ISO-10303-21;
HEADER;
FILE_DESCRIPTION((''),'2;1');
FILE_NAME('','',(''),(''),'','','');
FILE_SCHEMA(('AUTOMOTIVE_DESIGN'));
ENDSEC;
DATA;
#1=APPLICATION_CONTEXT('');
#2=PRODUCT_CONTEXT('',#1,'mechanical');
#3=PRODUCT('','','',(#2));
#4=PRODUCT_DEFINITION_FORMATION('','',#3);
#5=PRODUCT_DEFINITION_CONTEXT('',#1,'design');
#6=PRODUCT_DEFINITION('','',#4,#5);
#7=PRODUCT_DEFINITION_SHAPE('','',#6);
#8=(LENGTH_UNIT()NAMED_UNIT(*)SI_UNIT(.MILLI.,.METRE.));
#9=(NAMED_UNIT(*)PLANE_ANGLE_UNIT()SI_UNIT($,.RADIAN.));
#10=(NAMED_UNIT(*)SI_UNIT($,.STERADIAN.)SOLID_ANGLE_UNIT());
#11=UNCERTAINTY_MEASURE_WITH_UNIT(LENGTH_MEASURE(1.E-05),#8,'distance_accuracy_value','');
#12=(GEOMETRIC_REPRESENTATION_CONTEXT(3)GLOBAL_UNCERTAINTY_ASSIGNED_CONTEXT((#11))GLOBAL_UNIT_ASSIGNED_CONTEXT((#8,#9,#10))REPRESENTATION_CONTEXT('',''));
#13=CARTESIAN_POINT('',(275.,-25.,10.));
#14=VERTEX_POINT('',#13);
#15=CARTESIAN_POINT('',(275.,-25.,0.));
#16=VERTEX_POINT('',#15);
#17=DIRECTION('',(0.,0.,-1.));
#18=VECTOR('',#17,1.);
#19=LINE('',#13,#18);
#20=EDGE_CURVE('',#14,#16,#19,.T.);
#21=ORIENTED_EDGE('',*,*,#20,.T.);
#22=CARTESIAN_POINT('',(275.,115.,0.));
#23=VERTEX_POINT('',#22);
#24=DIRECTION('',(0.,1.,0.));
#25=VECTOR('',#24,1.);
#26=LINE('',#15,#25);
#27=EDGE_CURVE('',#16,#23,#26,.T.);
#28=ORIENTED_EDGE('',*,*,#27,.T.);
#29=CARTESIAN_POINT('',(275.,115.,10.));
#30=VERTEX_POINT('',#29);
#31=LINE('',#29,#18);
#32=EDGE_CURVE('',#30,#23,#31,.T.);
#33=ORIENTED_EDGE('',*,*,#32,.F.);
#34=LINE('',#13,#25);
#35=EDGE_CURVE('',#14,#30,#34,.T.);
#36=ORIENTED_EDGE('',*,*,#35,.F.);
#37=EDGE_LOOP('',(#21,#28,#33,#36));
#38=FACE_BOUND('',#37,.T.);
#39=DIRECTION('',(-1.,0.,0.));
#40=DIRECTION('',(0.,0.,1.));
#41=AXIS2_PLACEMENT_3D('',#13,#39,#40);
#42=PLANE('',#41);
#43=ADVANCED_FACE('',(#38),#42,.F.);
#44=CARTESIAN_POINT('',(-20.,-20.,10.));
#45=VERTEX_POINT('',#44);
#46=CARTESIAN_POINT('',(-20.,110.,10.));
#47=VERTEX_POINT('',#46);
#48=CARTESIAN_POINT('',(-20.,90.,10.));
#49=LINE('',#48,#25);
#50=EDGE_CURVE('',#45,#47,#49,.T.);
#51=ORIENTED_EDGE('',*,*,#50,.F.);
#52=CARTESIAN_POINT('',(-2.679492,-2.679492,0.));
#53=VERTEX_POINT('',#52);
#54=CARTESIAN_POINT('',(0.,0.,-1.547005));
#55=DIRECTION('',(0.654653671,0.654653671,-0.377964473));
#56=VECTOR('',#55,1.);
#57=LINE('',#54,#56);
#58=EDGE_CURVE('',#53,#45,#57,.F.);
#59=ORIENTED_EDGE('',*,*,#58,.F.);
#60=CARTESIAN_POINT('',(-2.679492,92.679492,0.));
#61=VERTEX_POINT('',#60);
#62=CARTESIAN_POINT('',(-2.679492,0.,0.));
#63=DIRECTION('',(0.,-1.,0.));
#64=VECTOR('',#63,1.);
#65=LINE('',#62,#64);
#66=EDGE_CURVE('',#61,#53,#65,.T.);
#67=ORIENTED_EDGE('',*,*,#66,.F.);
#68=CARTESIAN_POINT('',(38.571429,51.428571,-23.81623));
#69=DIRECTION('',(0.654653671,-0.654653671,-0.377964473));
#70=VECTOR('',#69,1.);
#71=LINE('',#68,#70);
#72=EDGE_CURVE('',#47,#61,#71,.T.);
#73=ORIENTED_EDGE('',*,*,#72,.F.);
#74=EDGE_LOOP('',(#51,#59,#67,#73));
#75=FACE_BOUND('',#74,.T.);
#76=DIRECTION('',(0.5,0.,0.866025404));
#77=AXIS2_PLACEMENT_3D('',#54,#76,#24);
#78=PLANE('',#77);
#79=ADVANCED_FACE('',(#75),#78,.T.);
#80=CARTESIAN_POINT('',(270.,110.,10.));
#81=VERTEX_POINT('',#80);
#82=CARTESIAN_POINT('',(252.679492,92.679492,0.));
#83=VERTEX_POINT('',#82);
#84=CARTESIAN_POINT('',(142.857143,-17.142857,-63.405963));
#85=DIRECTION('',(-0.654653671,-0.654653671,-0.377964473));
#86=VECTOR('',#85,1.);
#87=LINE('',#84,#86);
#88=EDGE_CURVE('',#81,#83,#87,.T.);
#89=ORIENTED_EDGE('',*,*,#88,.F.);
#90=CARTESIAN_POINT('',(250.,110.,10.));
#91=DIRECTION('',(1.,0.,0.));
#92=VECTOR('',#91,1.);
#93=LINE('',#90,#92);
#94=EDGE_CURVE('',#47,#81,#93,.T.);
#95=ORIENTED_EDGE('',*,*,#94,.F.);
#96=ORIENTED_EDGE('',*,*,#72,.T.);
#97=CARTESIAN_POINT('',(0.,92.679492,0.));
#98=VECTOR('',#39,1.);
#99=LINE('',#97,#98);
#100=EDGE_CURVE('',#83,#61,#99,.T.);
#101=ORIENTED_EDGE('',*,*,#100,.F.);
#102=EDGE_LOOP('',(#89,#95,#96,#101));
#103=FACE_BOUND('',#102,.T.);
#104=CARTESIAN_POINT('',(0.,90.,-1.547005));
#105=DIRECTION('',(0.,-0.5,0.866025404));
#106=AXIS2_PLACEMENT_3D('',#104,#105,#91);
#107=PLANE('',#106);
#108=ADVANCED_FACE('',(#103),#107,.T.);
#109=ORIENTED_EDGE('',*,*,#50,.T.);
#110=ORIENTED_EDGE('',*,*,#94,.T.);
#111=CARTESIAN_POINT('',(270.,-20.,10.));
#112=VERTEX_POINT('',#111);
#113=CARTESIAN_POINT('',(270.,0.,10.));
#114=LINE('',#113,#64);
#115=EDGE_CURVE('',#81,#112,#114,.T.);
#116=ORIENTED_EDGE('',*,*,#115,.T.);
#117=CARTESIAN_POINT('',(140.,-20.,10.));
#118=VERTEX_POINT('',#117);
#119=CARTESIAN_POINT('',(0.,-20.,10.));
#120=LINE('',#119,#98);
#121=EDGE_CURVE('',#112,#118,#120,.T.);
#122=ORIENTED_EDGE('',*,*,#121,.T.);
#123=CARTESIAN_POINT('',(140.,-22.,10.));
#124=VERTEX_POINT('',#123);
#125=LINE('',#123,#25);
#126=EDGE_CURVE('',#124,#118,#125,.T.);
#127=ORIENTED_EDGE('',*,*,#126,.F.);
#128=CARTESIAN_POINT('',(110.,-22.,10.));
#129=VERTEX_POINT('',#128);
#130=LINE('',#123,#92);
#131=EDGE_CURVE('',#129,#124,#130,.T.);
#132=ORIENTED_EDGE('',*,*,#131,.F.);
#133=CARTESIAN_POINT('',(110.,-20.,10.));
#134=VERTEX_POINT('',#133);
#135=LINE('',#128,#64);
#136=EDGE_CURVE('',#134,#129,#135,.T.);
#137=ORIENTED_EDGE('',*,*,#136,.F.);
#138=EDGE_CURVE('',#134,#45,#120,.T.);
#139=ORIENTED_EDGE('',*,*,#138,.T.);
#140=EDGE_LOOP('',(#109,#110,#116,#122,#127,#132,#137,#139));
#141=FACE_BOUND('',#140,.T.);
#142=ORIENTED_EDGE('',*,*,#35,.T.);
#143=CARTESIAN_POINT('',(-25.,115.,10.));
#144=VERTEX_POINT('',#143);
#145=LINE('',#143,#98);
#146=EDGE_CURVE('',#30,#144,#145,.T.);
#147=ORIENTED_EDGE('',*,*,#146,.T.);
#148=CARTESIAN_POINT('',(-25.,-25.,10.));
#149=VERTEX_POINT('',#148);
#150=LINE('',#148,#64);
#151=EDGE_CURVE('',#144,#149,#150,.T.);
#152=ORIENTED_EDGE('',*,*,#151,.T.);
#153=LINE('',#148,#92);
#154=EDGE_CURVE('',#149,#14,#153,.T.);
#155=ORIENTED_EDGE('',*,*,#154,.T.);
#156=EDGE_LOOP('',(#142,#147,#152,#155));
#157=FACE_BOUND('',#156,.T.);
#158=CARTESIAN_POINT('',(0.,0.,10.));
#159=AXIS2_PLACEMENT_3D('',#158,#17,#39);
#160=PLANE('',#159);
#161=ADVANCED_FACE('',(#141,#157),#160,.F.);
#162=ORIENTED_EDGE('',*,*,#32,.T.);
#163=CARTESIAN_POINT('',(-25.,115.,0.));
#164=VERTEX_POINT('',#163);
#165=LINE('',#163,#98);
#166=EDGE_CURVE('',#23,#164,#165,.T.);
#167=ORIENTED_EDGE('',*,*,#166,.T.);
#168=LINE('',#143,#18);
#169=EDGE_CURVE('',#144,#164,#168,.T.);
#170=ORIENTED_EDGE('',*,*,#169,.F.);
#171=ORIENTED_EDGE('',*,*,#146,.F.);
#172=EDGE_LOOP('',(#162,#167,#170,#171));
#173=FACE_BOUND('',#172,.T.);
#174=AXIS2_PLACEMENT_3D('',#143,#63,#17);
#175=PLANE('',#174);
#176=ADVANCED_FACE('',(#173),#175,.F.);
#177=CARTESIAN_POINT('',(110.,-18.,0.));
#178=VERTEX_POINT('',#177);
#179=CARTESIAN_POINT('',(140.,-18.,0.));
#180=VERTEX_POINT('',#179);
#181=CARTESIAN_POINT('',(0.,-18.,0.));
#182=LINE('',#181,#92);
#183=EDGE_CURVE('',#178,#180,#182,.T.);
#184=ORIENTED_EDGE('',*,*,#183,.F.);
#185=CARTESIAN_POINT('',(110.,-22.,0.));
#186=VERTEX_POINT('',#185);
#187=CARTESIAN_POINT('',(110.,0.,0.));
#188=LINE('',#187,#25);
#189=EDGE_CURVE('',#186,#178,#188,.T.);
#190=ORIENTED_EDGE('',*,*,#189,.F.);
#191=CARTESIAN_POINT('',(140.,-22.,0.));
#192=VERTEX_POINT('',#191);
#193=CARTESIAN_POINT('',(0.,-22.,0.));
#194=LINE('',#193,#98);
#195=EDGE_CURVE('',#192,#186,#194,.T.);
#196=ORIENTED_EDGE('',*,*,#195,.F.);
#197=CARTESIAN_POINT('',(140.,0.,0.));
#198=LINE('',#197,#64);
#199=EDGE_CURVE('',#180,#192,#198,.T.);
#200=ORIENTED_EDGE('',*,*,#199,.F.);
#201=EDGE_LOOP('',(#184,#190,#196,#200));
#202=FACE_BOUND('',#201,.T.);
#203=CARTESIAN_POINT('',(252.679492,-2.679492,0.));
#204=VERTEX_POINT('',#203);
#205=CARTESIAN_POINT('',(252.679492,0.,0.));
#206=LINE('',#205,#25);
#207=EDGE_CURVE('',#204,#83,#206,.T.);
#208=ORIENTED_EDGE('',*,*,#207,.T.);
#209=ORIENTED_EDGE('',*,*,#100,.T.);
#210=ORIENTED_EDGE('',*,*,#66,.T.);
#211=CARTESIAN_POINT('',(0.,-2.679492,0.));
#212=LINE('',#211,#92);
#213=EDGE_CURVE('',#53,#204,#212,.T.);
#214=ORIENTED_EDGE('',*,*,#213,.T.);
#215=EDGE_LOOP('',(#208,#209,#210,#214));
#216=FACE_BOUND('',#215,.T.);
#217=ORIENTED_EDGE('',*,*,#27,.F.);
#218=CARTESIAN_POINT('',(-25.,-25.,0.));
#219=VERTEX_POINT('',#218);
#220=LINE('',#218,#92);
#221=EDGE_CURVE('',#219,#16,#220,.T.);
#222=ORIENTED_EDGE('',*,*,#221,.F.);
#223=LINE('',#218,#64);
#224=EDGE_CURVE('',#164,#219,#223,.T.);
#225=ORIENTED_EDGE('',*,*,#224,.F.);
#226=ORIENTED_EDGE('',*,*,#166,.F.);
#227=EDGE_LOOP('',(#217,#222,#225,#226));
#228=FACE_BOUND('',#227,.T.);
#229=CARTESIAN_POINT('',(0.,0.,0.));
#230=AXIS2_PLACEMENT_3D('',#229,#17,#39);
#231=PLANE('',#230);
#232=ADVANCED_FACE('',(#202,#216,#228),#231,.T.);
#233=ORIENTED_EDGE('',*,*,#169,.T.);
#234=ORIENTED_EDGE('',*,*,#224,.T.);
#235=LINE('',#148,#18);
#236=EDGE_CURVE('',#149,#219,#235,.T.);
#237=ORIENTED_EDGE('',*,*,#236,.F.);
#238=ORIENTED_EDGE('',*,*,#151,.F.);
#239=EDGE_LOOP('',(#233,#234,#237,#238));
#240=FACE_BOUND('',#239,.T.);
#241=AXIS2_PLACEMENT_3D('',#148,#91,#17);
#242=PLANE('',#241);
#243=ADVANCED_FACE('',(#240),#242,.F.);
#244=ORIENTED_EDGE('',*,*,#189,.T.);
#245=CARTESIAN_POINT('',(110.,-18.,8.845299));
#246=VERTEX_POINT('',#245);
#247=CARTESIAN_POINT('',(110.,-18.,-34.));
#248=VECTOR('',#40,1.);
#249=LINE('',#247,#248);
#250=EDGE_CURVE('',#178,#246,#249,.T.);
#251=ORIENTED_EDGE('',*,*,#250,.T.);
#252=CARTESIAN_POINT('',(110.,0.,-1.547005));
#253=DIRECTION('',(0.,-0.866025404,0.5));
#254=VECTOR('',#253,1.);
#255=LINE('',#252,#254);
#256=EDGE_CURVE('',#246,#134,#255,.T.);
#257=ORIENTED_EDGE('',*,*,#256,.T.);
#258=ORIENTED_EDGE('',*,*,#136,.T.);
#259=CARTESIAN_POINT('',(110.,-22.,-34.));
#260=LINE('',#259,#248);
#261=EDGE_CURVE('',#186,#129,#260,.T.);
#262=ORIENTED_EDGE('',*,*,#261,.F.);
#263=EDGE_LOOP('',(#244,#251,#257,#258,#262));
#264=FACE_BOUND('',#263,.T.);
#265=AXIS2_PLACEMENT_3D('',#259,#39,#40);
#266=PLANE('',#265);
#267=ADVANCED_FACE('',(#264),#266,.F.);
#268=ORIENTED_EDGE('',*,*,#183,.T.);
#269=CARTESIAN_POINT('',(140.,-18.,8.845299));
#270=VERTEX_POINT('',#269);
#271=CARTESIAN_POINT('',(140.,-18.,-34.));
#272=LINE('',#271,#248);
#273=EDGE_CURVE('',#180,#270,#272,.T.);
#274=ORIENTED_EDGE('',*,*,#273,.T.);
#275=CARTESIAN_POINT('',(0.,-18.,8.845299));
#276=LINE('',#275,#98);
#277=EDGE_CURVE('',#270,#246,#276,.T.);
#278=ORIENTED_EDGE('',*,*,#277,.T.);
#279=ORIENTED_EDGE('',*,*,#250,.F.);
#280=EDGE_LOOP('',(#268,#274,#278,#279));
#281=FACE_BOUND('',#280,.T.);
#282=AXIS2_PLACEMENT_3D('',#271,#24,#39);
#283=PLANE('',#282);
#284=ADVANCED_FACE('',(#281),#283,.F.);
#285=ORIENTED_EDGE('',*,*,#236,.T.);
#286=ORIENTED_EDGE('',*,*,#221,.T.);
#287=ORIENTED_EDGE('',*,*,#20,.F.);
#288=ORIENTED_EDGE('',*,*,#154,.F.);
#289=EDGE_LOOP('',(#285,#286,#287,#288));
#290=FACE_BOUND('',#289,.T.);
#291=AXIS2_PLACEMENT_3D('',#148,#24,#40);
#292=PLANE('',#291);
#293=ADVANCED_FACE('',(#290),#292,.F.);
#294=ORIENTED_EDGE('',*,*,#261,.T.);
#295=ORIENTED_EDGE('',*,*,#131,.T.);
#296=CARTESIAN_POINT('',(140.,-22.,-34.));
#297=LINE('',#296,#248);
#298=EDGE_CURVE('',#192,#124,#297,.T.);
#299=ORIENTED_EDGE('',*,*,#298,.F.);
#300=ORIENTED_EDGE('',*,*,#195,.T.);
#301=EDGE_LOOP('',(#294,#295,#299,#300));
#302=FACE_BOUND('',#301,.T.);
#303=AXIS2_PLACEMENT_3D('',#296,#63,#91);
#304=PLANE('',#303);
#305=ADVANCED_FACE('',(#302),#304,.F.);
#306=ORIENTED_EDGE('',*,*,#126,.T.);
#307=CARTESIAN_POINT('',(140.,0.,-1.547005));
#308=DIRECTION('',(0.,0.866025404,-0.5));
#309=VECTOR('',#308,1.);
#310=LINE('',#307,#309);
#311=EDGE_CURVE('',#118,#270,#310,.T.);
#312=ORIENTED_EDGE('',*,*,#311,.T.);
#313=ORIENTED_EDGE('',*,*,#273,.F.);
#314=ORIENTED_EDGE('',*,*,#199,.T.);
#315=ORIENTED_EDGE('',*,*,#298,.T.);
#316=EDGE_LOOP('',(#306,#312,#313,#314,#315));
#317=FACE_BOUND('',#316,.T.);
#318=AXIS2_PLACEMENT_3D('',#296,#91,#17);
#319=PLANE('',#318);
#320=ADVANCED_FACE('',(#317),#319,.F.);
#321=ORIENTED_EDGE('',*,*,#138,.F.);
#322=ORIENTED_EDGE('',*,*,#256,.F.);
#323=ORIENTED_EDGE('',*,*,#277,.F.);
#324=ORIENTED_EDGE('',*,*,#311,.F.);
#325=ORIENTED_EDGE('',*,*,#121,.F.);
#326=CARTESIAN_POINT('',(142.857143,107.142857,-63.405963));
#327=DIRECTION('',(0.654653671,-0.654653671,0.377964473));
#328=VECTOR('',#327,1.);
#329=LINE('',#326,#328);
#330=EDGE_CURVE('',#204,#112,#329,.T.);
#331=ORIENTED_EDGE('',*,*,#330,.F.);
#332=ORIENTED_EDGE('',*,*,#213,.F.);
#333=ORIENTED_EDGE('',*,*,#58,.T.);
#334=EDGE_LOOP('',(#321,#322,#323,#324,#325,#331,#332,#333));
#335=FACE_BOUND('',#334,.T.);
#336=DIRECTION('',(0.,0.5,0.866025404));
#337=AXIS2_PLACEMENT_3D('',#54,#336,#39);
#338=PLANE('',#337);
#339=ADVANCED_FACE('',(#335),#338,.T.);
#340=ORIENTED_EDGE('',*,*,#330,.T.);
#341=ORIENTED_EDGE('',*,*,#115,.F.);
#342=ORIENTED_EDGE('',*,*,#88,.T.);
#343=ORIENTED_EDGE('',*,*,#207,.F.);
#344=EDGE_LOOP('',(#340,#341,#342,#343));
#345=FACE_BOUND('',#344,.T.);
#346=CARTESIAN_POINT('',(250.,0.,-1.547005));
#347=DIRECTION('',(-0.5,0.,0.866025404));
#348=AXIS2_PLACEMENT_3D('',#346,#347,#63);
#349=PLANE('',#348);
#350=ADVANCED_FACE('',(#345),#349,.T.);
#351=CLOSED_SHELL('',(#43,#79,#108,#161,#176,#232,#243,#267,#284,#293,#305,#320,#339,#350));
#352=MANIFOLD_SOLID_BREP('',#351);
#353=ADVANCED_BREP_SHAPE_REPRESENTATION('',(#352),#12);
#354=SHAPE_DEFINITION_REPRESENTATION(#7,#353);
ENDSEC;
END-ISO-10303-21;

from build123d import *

# Parameters (mm, degrees)
SKETCH1_W           = 300
SKETCH1_H           = 140
SKETCH1_W_2         = 250
SKETCH1_H_2         = 90
BOSS_EXTRUDE1_DEPTH = 10
SKETCH2_W           = 30
SKETCH2_H           = 4
CUT_EXTRUDE1_DEPTH  = 44


with BuildPart() as part:
    # Sketch1 → Boss-Extrude1 (new body)
    with BuildSketch(Plane.XY):
        with Locations((125, 45)):
            Rectangle(SKETCH1_W, SKETCH1_H)
        with Locations((125, 45)):
            Rectangle(SKETCH1_W_2, SKETCH1_H_2, mode=Mode.SUBTRACT)
    extrude(amount=BOSS_EXTRUDE1_DEPTH)

    # Chamfer1
    # the kernel refuses this chamfer: 20, 11.547005384 mm, written as the material it takes off along each edge
    with BuildSketch(Plane(origin=(250, 0, 10), x_dir=(-0.05789386240267053, 0, -0.9983227437537926), z_dir=(0, 1, 0)), Plane(origin=(0, 90, 10), x_dir=(0.05789386240267081, 0, -0.9983227437537926), z_dir=(0, -1, 0))) as chamfer1_piece_1:
        with BuildLine():
            Line((11.967077239, 0), (-1.59731639, -20.634955616))
            Line((-1.59731639, -20.634955616), (-1.996645488, -20.611798071))
            ThreePointArc((-1.996645488, -20.611798071), (-0.998322744, -10.305899035), (-0.399329098, 0.023157545))
            Line((-0.399329098, 0.023157545), (0.023157545, 0.399329098))
            ThreePointArc((0.023157545, 0.399329098), (5.986641142, 0.053499955), (11.990234784, 0.399329098))
            Line((11.990234784, 0.399329098), (11.967077239, 0))
        make_face()
    extrude(amount=90, mode=Mode.SUBTRACT)
    with BuildSketch(Plane(origin=(250, 90, 10), x_dir=(0, -0.05789386240267053, -0.9983227437537926), z_dir=(-1, 0, 0)), Plane(origin=(0, 0, 10), x_dir=(0, 0.05789386240267081, -0.9983227437537926), z_dir=(1, 0, 0))) as chamfer1_piece_2:
        with BuildLine():
            Line((11.967077239, 0), (-1.59731639, -20.634955616))
            Line((-1.59731639, -20.634955616), (-1.996645488, -20.611798071))
            ThreePointArc((-1.996645488, -20.611798071), (-0.998322744, -10.305899035), (-0.399329098, 0.023157545))
            Line((-0.399329098, 0.023157545), (0.023157545, 0.399329098))
            ThreePointArc((0.023157545, 0.399329098), (5.986641142, 0.053499955), (11.990234784, 0.399329098))
            Line((11.990234784, 0.399329098), (11.967077239, 0))
        make_face()
    extrude(amount=250, mode=Mode.SUBTRACT)
    with BuildSketch(Plane(origin=(250, -51.741715093, 10), x_dir=(-0.05789386240267053, 0, -0.9983227437537926), z_dir=(0, 1, 0))) as chamfer1_piece_3a_section:
        with BuildLine():
            Line((11.967077239, 0), (-1.59731639, -20.634955616))
            Line((-1.59731639, -20.634955616), (-1.996645488, -20.611798071))
            ThreePointArc((-1.996645488, -20.611798071), (-0.998322744, -10.305899035), (-0.399329098, 0.023157545))
            Line((-0.399329098, 0.023157545), (0.023157545, 0.399329098))
            ThreePointArc((0.023157545, 0.399329098), (5.986641142, 0.053499955), (11.990234784, 0.399329098))
            Line((11.990234784, 0.399329098), (11.967077239, 0))
        make_face()
    chamfer1_piece_3a = extrude(amount=141.741715093, mode=Mode.PRIVATE)
    chamfer1_piece_3a = split(chamfer1_piece_3a, bisect_by=Plane(origin=(256.707645432, 0, 6.297222994), z_dir=(0, -1, 0)), keep=Keep.TOP, mode=Mode.PRIVATE)
    with BuildSketch(Plane(origin=(0, 0, 10), x_dir=(0, 0.05789386240267081, -0.9983227437537926), z_dir=(1, 0, 0))) as chamfer1_piece_3b_section:
        with BuildLine():
            Line((11.967077239, 0), (-1.59731639, -20.634955616))
            Line((-1.59731639, -20.634955616), (-1.996645488, -20.611798071))
            ThreePointArc((-1.996645488, -20.611798071), (-0.998322744, -10.305899035), (-0.399329098, 0.023157545))
            Line((-0.399329098, 0.023157545), (0.023157545, 0.399329098))
            ThreePointArc((0.023157545, 0.399329098), (5.986641142, 0.053499955), (11.990234784, 0.399329098))
            Line((11.990234784, 0.399329098), (11.967077239, 0))
        make_face()
    chamfer1_piece_3b = extrude(amount=301.741715093, mode=Mode.PRIVATE)
    chamfer1_piece_3b = split(chamfer1_piece_3b, bisect_by=Plane(origin=(250, -6.707645432, 6.297222994), z_dir=(1, 0, 0)), keep=Keep.TOP, mode=Mode.PRIVATE)
    chamfer1_piece_3 = chamfer1_piece_3a & chamfer1_piece_3b
    add(chamfer1_piece_3, mode=Mode.SUBTRACT)
    with BuildSketch(Plane(origin=(301.741715093, 90, 10), x_dir=(0, -0.05789386240267053, -0.9983227437537926), z_dir=(-1, 0, 0))) as chamfer1_piece_4a_section:
        with BuildLine():
            Line((11.967077239, 0), (-1.59731639, -20.634955616))
            Line((-1.59731639, -20.634955616), (-1.996645488, -20.611798071))
            ThreePointArc((-1.996645488, -20.611798071), (-0.998322744, -10.305899035), (-0.399329098, 0.023157545))
            Line((-0.399329098, 0.023157545), (0.023157545, 0.399329098))
            ThreePointArc((0.023157545, 0.399329098), (5.986641142, 0.053499955), (11.990234784, 0.399329098))
            Line((11.990234784, 0.399329098), (11.967077239, 0))
        make_face()
    chamfer1_piece_4a = extrude(amount=301.741715093, mode=Mode.PRIVATE)
    chamfer1_piece_4a = split(chamfer1_piece_4a, bisect_by=Plane(origin=(250, 96.707645432, 6.297222994), z_dir=(1, 0, 0)), keep=Keep.TOP, mode=Mode.PRIVATE)
    with BuildSketch(Plane(origin=(250, 0, 10), x_dir=(-0.05789386240267053, 0, -0.9983227437537926), z_dir=(0, 1, 0))) as chamfer1_piece_4b_section:
        with BuildLine():
            Line((11.967077239, 0), (-1.59731639, -20.634955616))
            Line((-1.59731639, -20.634955616), (-1.996645488, -20.611798071))
            ThreePointArc((-1.996645488, -20.611798071), (-0.998322744, -10.305899035), (-0.399329098, 0.023157545))
            Line((-0.399329098, 0.023157545), (0.023157545, 0.399329098))
            ThreePointArc((0.023157545, 0.399329098), (5.986641142, 0.053499955), (11.990234784, 0.399329098))
            Line((11.990234784, 0.399329098), (11.967077239, 0))
        make_face()
    chamfer1_piece_4b = extrude(amount=141.741715093, mode=Mode.PRIVATE)
    chamfer1_piece_4b = split(chamfer1_piece_4b, bisect_by=Plane(origin=(256.707645432, 90, 6.297222994), z_dir=(0, 1, 0)), keep=Keep.TOP, mode=Mode.PRIVATE)
    chamfer1_piece_4 = chamfer1_piece_4a & chamfer1_piece_4b
    add(chamfer1_piece_4, mode=Mode.SUBTRACT)
    with BuildSketch(Plane(origin=(0, 141.741715093, 10), x_dir=(0.05789386240267081, 0, -0.9983227437537926), z_dir=(0, -1, 0))) as chamfer1_piece_5a_section:
        with BuildLine():
            Line((11.967077239, 0), (-1.59731639, -20.634955616))
            Line((-1.59731639, -20.634955616), (-1.996645488, -20.611798071))
            ThreePointArc((-1.996645488, -20.611798071), (-0.998322744, -10.305899035), (-0.399329098, 0.023157545))
            Line((-0.399329098, 0.023157545), (0.023157545, 0.399329098))
            ThreePointArc((0.023157545, 0.399329098), (5.986641142, 0.053499955), (11.990234784, 0.399329098))
            Line((11.990234784, 0.399329098), (11.967077239, 0))
        make_face()
    chamfer1_piece_5a = extrude(amount=141.741715093, mode=Mode.PRIVATE)
    chamfer1_piece_5a = split(chamfer1_piece_5a, bisect_by=Plane(origin=(-6.707645432, 90, 6.297222994), z_dir=(0, 1, 0)), keep=Keep.TOP, mode=Mode.PRIVATE)
    with BuildSketch(Plane(origin=(250, 90, 10), x_dir=(0, -0.05789386240267053, -0.9983227437537926), z_dir=(-1, 0, 0))) as chamfer1_piece_5b_section:
        with BuildLine():
            Line((11.967077239, 0), (-1.59731639, -20.634955616))
            Line((-1.59731639, -20.634955616), (-1.996645488, -20.611798071))
            ThreePointArc((-1.996645488, -20.611798071), (-0.998322744, -10.305899035), (-0.399329098, 0.023157545))
            Line((-0.399329098, 0.023157545), (0.023157545, 0.399329098))
            ThreePointArc((0.023157545, 0.399329098), (5.986641142, 0.053499955), (11.990234784, 0.399329098))
            Line((11.990234784, 0.399329098), (11.967077239, 0))
        make_face()
    chamfer1_piece_5b = extrude(amount=301.741715093, mode=Mode.PRIVATE)
    chamfer1_piece_5b = split(chamfer1_piece_5b, bisect_by=Plane(origin=(0, 96.707645432, 6.297222994), z_dir=(-1, 0, 0)), keep=Keep.TOP, mode=Mode.PRIVATE)
    chamfer1_piece_5 = chamfer1_piece_5a & chamfer1_piece_5b
    add(chamfer1_piece_5, mode=Mode.SUBTRACT)
    with BuildSketch(Plane(origin=(0, 90, 10), x_dir=(0.05789386240267081, 0, -0.9983227437537926), z_dir=(0, -1, 0))) as chamfer1_piece_6a_section:
        with BuildLine():
            Line((11.967077239, 0), (-1.59731639, -20.634955616))
            Line((-1.59731639, -20.634955616), (-1.996645488, -20.611798071))
            ThreePointArc((-1.996645488, -20.611798071), (-0.998322744, -10.305899035), (-0.399329098, 0.023157545))
            Line((-0.399329098, 0.023157545), (0.023157545, 0.399329098))
            ThreePointArc((0.023157545, 0.399329098), (5.986641142, 0.053499955), (11.990234784, 0.399329098))
            Line((11.990234784, 0.399329098), (11.967077239, 0))
        make_face()
    chamfer1_piece_6a = extrude(amount=141.741715093, mode=Mode.PRIVATE)
    chamfer1_piece_6a = split(chamfer1_piece_6a, bisect_by=Plane(origin=(-6.707645432, 0, 6.297222994), z_dir=(0, -1, 0)), keep=Keep.TOP, mode=Mode.PRIVATE)
    with BuildSketch(Plane(origin=(-51.741715093, 0, 10), x_dir=(0, 0.05789386240267081, -0.9983227437537926), z_dir=(1, 0, 0))) as chamfer1_piece_6b_section:
        with BuildLine():
            Line((11.967077239, 0), (-1.59731639, -20.634955616))
            Line((-1.59731639, -20.634955616), (-1.996645488, -20.611798071))
            ThreePointArc((-1.996645488, -20.611798071), (-0.998322744, -10.305899035), (-0.399329098, 0.023157545))
            Line((-0.399329098, 0.023157545), (0.023157545, 0.399329098))
            ThreePointArc((0.023157545, 0.399329098), (5.986641142, 0.053499955), (11.990234784, 0.399329098))
            Line((11.990234784, 0.399329098), (11.967077239, 0))
        make_face()
    chamfer1_piece_6b = extrude(amount=301.741715093, mode=Mode.PRIVATE)
    chamfer1_piece_6b = split(chamfer1_piece_6b, bisect_by=Plane(origin=(0, -6.707645432, 6.297222994), z_dir=(-1, 0, 0)), keep=Keep.TOP, mode=Mode.PRIVATE)
    chamfer1_piece_6 = chamfer1_piece_6a & chamfer1_piece_6b
    add(chamfer1_piece_6, mode=Mode.SUBTRACT)

    # Sketch2 → Cut-Extrude1 (cut)
    with BuildSketch(Plane.XY.offset(10)):
        with Locations((125, -20)):
            Rectangle(SKETCH2_W, SKETCH2_H)
    extrude(amount=-CUT_EXTRUDE1_DEPTH, mode=Mode.SUBTRACT)


solid = part.part
